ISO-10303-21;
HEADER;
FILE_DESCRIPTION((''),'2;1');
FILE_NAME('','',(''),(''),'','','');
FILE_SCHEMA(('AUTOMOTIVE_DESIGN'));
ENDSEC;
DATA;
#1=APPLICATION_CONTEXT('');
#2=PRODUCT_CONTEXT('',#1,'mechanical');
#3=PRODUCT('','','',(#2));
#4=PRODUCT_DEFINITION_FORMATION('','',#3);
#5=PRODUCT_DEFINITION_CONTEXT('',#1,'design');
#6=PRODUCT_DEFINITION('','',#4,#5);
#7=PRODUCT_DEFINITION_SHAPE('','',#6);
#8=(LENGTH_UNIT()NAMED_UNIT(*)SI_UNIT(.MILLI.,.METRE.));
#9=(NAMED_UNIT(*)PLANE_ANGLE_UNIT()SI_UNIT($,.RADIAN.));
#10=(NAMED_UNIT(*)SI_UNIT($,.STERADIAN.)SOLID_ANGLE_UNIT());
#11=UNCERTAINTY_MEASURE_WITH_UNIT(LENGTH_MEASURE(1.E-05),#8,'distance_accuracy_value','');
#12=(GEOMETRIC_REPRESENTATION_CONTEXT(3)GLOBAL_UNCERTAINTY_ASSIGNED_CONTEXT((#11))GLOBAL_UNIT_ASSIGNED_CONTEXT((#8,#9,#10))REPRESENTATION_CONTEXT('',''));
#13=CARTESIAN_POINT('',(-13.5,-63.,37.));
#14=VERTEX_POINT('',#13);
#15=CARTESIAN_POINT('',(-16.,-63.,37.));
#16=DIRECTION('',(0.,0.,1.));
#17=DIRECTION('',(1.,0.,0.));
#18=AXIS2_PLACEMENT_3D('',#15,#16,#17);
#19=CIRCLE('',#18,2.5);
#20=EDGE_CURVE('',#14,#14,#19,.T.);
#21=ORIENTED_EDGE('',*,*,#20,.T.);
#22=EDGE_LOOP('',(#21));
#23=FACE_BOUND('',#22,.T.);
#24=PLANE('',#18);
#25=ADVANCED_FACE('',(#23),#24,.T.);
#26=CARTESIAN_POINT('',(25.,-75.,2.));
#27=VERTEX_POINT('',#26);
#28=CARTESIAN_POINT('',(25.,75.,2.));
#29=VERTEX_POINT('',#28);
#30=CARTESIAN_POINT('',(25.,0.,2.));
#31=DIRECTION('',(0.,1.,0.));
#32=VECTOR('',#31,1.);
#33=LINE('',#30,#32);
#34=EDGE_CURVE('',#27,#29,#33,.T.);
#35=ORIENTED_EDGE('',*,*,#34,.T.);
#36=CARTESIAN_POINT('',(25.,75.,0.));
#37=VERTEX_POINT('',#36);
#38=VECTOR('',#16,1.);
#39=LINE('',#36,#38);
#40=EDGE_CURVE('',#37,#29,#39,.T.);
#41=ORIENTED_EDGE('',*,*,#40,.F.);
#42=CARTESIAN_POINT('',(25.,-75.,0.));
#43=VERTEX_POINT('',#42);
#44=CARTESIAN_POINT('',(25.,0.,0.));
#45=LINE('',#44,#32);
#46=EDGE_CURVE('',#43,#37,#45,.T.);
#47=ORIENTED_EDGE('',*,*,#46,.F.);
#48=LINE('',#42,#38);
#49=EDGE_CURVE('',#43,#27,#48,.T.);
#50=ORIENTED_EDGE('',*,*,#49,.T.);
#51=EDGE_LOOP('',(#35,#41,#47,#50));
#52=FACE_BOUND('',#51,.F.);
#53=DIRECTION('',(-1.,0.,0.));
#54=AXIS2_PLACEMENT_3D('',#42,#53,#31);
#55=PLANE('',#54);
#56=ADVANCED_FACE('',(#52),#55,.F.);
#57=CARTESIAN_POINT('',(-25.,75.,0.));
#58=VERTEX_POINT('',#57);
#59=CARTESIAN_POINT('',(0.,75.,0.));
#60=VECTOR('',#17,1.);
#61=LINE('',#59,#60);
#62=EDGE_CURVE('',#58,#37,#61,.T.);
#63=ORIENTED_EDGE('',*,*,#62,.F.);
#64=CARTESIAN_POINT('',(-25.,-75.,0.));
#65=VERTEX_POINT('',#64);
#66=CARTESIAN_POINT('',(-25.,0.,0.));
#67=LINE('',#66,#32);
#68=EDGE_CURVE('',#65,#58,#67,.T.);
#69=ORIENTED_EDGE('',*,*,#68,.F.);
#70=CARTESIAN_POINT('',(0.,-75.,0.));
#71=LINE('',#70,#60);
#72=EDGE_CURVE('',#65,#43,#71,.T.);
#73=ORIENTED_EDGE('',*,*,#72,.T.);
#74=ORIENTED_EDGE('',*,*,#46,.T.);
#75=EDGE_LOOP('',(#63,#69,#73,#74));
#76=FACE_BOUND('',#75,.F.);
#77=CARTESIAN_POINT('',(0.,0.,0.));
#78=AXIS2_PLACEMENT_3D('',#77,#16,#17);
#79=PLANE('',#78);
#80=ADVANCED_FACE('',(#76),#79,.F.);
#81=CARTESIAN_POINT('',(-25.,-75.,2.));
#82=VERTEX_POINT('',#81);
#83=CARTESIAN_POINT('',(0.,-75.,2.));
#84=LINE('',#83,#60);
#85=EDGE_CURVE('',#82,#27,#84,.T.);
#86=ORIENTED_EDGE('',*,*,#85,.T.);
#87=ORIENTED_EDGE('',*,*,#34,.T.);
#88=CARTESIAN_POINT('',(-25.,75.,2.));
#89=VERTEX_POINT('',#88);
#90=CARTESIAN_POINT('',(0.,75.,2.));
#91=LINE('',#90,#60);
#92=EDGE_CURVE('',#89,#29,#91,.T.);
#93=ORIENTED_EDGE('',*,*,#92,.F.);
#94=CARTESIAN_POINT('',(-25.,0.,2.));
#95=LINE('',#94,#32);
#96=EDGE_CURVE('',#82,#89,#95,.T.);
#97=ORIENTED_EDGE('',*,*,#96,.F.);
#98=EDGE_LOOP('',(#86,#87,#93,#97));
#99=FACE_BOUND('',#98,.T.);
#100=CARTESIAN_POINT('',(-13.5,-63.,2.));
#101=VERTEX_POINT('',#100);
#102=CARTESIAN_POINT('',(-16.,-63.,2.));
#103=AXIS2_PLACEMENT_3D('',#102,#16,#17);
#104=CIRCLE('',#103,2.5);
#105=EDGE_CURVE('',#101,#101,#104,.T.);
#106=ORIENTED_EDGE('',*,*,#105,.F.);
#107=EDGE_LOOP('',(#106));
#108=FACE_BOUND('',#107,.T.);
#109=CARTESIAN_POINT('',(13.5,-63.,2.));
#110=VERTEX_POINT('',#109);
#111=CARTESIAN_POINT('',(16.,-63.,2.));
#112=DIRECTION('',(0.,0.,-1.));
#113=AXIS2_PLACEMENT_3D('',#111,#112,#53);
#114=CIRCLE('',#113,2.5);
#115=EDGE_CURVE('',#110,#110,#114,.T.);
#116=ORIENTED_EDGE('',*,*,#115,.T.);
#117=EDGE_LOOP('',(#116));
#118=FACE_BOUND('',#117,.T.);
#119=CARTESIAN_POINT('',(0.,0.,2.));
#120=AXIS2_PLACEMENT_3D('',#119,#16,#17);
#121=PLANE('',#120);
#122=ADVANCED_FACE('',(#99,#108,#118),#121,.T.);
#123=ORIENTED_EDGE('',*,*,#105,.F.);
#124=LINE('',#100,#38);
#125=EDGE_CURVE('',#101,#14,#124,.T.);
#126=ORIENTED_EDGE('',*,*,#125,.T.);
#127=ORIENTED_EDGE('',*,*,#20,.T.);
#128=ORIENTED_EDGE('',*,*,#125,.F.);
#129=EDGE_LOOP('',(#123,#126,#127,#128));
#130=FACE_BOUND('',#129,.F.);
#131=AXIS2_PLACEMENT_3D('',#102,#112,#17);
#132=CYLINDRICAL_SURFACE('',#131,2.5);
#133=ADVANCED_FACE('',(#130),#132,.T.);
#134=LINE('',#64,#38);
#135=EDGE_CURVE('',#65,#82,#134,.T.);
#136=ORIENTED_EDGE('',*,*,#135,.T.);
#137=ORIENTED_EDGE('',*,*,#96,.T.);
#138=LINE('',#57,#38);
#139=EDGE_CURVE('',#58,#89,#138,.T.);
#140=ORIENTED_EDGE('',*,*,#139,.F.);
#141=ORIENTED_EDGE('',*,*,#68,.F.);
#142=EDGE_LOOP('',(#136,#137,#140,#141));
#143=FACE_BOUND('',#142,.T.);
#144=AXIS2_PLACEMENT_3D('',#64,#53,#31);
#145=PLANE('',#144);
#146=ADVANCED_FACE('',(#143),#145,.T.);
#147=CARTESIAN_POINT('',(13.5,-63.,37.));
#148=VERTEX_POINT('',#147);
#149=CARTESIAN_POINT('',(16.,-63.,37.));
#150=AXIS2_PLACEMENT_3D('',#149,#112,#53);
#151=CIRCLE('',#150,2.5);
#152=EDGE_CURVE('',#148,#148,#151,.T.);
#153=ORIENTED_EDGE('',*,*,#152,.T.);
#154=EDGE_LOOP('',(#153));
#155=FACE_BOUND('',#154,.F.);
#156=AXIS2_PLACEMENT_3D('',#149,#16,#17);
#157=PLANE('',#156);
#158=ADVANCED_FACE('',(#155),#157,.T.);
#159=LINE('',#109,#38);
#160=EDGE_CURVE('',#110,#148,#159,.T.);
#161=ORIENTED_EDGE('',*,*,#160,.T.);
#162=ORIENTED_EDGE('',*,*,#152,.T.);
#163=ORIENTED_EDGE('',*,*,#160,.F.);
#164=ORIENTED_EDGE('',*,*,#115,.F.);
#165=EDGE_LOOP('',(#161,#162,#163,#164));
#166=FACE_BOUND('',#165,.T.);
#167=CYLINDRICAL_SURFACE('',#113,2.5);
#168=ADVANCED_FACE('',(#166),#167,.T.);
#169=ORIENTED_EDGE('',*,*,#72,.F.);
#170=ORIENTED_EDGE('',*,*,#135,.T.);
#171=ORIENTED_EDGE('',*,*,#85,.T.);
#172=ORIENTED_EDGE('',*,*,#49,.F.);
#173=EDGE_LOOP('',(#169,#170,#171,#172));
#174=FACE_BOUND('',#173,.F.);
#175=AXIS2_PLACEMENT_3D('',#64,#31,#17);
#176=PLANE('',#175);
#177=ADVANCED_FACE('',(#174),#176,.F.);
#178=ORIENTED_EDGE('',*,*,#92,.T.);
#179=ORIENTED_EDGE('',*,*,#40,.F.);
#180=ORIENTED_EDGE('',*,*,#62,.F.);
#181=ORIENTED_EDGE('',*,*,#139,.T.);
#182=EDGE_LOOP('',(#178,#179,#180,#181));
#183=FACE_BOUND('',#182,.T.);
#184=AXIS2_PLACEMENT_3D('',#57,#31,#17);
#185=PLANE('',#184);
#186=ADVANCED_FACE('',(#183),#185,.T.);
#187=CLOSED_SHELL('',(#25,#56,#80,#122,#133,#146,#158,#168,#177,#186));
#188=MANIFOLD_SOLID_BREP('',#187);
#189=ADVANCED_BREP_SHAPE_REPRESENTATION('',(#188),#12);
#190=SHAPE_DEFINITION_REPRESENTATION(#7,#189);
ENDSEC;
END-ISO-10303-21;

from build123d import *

# Parameters (mm, degrees)
F0_W     = 50
F0_H     = 150
F1_DEPTH = 2
F2_R     = 2.5
F3_DEPTH = 35


# Not quite as in the source:
# - a pattern or mirror of a feature is missing from the dataset's text; its kind, count and spacing are read off the source's solid


with BuildPart() as f1:
    # F0 (on Top) → F1 (new body)
    with BuildSketch(Plane.XY):
        Rectangle(F0_W, F0_H)
    extrude(amount=F1_DEPTH)

    # F2 (on face) → F3 (join)
    with BuildSketch(Plane.XY.offset(2)):
        with Locations((-16, -63)):
            Circle(F2_R)
    f3 = extrude(amount=F3_DEPTH)

    # F3_copies: F3 across plane
    add(f3.mirror(Plane(origin=(0, 0, 0), x_dir=(0, 0, 1), z_dir=(1, 0, 0))))


solid = f1.part
